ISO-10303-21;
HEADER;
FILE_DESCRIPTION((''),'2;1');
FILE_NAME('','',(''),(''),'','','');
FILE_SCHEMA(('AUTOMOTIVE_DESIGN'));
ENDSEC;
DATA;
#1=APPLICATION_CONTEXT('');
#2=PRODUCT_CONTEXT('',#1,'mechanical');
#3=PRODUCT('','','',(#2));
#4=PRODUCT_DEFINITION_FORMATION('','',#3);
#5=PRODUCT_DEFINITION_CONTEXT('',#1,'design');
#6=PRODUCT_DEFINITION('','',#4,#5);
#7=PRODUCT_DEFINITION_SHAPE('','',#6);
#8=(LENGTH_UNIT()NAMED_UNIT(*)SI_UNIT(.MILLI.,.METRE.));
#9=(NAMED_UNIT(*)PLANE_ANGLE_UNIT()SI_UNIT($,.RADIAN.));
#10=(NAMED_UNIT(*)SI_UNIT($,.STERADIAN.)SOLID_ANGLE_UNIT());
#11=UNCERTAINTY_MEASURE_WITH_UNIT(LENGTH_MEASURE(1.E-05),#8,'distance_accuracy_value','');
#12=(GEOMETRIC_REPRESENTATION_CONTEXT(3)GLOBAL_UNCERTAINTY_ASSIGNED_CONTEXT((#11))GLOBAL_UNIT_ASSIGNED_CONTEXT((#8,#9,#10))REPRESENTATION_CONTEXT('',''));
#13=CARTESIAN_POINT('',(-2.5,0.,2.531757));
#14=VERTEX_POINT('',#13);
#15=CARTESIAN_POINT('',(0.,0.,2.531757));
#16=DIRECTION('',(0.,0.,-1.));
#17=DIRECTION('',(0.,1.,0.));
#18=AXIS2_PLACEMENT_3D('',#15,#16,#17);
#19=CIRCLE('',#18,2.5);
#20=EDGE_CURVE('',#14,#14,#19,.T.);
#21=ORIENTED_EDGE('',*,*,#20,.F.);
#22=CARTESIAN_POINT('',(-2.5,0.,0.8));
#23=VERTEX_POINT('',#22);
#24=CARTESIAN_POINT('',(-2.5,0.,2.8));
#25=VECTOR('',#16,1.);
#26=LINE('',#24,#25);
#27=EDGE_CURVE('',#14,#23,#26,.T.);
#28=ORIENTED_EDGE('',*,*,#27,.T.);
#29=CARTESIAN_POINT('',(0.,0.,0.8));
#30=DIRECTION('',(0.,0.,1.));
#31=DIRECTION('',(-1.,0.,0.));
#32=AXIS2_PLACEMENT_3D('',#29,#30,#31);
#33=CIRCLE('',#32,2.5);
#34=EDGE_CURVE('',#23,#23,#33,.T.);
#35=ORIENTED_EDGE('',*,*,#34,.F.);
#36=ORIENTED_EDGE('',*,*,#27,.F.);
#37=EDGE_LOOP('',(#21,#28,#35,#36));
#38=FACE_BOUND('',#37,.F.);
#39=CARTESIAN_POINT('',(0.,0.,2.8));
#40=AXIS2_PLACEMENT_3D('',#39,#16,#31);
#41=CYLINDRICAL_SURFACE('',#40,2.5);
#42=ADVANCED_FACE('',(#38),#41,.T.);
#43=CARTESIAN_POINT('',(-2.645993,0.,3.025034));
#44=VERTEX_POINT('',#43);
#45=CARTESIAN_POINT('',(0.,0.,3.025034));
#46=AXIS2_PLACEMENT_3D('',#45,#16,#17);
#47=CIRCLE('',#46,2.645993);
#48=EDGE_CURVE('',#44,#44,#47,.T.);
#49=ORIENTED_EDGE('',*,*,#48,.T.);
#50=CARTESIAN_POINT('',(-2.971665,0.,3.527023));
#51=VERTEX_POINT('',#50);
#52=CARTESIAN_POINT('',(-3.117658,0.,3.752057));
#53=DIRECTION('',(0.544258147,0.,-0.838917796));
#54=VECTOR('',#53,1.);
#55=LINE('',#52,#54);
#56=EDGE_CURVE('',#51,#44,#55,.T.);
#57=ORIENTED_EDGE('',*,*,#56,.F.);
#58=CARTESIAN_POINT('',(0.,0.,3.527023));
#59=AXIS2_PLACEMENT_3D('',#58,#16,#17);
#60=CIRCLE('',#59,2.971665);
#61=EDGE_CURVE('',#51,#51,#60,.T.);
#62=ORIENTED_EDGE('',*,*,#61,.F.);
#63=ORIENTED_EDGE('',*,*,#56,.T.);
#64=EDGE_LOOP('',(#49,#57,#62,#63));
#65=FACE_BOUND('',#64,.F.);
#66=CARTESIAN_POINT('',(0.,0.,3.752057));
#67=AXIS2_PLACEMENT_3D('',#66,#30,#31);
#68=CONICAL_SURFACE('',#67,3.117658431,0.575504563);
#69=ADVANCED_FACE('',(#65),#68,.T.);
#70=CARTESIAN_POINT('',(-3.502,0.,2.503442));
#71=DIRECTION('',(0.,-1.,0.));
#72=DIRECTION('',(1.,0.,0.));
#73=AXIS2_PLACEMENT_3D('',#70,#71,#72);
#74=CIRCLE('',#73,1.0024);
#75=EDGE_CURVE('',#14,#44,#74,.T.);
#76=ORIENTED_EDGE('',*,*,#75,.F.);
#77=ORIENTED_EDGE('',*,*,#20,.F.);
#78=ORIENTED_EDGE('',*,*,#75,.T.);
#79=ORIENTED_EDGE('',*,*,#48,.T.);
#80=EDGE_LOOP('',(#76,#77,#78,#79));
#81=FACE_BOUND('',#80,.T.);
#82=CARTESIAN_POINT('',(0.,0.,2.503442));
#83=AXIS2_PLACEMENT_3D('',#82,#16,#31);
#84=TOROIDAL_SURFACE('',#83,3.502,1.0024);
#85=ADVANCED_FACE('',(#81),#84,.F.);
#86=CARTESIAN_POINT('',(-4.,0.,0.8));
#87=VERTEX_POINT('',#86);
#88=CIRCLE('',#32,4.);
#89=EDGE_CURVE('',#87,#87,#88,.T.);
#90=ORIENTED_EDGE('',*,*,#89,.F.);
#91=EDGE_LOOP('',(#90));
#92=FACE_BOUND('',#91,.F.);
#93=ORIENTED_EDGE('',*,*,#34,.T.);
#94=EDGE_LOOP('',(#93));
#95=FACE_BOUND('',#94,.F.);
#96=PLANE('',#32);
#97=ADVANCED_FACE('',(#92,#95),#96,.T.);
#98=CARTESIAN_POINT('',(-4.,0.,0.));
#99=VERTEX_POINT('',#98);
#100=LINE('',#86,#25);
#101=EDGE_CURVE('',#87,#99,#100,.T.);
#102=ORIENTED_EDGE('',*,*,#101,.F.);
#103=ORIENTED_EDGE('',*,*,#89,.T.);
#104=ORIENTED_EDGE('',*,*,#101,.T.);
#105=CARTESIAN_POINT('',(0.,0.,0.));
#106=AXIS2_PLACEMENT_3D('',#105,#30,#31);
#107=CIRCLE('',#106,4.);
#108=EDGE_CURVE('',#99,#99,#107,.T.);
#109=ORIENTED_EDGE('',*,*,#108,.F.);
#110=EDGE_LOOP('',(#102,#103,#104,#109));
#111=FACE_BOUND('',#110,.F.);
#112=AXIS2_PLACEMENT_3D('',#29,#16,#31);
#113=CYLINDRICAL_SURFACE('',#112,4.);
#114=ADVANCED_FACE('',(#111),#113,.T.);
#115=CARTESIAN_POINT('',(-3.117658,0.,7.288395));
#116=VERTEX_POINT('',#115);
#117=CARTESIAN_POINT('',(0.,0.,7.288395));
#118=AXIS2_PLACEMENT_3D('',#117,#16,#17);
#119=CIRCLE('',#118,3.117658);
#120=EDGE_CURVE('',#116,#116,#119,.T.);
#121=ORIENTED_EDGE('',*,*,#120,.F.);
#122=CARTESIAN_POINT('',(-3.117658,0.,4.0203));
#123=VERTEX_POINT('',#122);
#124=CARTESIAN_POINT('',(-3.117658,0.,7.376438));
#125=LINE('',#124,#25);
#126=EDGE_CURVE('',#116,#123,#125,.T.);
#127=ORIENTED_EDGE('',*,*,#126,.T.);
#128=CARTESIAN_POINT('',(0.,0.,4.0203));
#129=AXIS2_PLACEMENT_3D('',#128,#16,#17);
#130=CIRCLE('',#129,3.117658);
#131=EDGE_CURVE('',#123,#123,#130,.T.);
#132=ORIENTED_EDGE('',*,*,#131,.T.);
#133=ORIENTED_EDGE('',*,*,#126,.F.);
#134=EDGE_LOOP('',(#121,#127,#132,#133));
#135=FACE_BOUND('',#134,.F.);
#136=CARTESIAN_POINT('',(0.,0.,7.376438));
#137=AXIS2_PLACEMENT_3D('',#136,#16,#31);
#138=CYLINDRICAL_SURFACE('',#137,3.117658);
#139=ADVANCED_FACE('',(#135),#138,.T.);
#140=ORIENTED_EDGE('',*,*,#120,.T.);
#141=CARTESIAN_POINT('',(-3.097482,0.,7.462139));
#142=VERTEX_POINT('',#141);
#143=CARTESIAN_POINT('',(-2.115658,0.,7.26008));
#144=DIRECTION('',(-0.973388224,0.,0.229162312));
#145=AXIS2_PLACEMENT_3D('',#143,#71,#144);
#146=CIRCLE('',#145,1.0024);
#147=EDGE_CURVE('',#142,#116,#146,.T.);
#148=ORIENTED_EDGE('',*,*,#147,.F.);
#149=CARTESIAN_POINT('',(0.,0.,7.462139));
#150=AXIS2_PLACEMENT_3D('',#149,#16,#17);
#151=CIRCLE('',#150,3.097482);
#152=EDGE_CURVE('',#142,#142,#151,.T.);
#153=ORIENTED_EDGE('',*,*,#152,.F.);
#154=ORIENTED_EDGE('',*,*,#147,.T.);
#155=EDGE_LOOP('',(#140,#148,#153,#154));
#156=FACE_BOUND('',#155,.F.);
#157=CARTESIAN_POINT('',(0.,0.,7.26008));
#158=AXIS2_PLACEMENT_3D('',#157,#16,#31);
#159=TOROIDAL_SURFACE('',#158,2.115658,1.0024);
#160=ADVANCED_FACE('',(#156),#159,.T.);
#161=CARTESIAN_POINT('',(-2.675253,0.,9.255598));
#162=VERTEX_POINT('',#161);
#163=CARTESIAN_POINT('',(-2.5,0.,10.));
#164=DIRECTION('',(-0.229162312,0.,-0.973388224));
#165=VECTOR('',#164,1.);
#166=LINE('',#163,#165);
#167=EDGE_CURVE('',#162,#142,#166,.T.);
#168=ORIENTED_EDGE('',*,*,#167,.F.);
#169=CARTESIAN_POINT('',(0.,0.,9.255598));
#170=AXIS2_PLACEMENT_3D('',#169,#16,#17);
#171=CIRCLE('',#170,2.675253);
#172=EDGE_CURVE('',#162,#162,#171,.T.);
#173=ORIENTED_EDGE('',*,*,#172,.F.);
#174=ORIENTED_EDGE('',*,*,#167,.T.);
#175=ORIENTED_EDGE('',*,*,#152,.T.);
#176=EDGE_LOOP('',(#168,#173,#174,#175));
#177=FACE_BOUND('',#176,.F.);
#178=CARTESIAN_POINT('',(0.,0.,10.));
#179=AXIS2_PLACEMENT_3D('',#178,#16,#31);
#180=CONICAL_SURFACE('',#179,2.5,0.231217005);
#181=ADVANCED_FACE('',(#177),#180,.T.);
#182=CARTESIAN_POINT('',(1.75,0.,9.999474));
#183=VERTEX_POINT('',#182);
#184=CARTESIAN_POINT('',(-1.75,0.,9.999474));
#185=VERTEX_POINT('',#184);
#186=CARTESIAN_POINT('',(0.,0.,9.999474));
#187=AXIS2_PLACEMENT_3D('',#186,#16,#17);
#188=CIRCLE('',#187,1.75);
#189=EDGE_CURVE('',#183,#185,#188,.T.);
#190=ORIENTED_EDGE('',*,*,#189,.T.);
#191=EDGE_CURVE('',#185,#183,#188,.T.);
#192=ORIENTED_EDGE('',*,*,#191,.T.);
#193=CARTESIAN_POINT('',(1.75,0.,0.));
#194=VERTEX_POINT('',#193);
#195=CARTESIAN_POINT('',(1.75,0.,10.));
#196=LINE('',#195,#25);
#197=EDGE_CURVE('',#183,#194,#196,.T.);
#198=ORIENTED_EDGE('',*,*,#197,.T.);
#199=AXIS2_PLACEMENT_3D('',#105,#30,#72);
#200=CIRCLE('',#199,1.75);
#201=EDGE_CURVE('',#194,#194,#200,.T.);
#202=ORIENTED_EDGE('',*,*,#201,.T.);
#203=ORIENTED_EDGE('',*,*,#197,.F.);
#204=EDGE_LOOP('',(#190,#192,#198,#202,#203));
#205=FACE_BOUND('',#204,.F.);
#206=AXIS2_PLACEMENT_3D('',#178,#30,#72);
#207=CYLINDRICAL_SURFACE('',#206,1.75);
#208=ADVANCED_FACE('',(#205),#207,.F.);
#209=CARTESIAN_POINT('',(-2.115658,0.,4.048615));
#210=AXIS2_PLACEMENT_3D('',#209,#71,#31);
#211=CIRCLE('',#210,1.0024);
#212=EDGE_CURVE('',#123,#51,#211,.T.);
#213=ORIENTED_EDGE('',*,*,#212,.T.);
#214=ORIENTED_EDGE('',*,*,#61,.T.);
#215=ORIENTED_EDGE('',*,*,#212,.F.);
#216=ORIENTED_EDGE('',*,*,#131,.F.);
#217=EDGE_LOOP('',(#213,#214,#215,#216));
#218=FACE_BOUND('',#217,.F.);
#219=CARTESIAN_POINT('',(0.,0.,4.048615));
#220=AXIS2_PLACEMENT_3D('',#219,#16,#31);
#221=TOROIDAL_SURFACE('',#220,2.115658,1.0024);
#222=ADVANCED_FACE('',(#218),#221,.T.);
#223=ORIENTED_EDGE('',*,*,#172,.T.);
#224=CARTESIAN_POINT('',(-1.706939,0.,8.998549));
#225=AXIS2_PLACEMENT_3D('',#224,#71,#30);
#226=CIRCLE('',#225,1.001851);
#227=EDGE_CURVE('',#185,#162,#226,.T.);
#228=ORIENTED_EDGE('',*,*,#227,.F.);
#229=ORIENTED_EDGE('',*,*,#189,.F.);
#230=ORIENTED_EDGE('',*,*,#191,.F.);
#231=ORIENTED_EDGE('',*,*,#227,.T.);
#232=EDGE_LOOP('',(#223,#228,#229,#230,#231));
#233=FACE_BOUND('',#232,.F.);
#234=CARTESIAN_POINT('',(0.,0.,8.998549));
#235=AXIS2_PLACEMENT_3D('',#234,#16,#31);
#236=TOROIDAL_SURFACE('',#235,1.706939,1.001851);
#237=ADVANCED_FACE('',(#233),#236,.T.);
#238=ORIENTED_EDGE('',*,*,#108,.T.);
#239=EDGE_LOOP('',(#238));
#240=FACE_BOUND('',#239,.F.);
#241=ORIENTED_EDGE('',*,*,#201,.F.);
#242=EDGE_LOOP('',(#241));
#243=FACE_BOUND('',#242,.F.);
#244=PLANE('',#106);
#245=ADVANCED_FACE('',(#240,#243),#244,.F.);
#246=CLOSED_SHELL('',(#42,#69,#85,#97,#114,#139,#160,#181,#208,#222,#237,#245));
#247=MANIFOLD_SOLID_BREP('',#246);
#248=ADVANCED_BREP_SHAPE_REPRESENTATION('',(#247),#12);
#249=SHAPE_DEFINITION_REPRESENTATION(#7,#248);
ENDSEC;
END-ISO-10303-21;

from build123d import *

# Parameters (mm, degrees)
F2_R     = 1.75
F3_DEPTH = 25


# Not quite as in the source:
# - a fillet or chamfer that OpenCascade refuses, or shapes differently, is made with other operations: its cross-section is extruded or revolved along the edge and cut away or added


with BuildPart() as f1:
    # F0 (on Front) → F1 (revolve)
    with BuildSketch(Plane.XZ):
        Polygon((-4, 0), (0, 0), (0, 10), (-2.5, 10), (-3.1176584307, 7.3764383901), (-3.1176584307, 3.7520567627), (-2.5, 2.8), (-2.5, 0.8), (-4, 0.8), align=None)
    revolve(axis=Axis((0, 0, 5), (0, 0, 1)))

    # F2 (on face) → F3 (cut)
    with BuildSketch(Plane.XY.offset(10)):
        Circle(F2_R)
    extrude(amount=-F3_DEPTH, mode=Mode.SUBTRACT)

    # F4: fillet of radius 1 on 7 edges, made by hand

    # F4_s1 → F4_t2 (revolve)
    with BuildSketch(Plane.XZ):
        with BuildLine():
            ThreePointArc((-2.4996, 2.5034415217), (-2.5408144836, 2.7879202783), (-2.6610688008, 3.0490058884))
            Line((-2.6610688008, 3.0490058884), (-2.5769756809, 3.1035623251))
            ThreePointArc((-2.5769756809, 3.1035623251), (-2.4966090641, 2.9789505293), (-2.4159068801, 2.8545564367))
            Line((-2.4159068801, 2.8545564367), (-2.39976, 2.8))
            ThreePointArc((-2.39976, 2.8), (-2.39976, 2.6517207608), (-2.39936, 2.5034415217))
            Line((-2.39936, 2.5034415217), (-2.4996, 2.5034415217))
        make_face()
    revolve(axis=Axis((0, 0, 2.8), (0, 0, 1)))

    # F4_s3 → F4_t4 (revolve, cut)
    with BuildSketch(Plane.XZ):
        with BuildLine():
            ThreePointArc((-1.7069387157, 10.0004), (-2.3289092353, 9.7839522663), (-2.6821291124, 9.2281351497))
            Line((-2.6821291124, 9.2281351497), (-2.7796481521, 9.251093809))
            ThreePointArc((-2.7796481521, 9.251093809), (-2.6883889182, 9.6369804016), (-2.5975190397, 10.0229586592))
            Line((-2.5975190397, 10.0229586592), (-2.5, 10.1001851443))
            ThreePointArc((-2.5, 10.1001851443), (-2.1034693578, 10.1001851443), (-1.7069387157, 10.1005851443))
            Line((-1.7069387157, 10.1005851443), (-1.7069387157, 10.0004))
        make_face()
    revolve(axis=Axis((0, 0, 10), (0, 0, 1)), mode=Mode.SUBTRACT)

    # F4_s5 → F4_t6 (revolve, cut)
    with BuildSketch(Plane.XZ):
        with BuildLine():
            ThreePointArc((-3.0913827866, 7.489792119), (-3.1113671869, 7.3757078111), (-3.1180584307, 7.2600798179))
            Line((-3.1180584307, 7.2600798179), (-3.2182984307, 7.2600798179))
            ThreePointArc((-3.2182984307, 7.2600798179), (-3.2178984307, 7.318259104), (-3.2178984307, 7.3764383901))
            Line((-3.2178984307, 7.3764383901), (-3.2152308663, 7.3994096202))
            ThreePointArc((-3.2152308663, 7.3994096202), (-3.2018983666, 7.4560406522), (-3.1889552222, 7.5127633491))
            Line((-3.1889552222, 7.5127633491), (-3.0913827866, 7.489792119))
        make_face()
    revolve(axis=Axis((0, 0, 7.3764383901), (0, 0, 1)), mode=Mode.SUBTRACT)

    # F4_s7 → F4_t8 (revolve, cut)
    with BuildSketch(Plane.XZ):
        with BuildLine():
            ThreePointArc((-3.1180584307, 4.048615241), (-3.0768439472, 3.7641364844), (-2.9565896299, 3.5030508742))
            Line((-2.9565896299, 3.5030508742), (-3.0406827498, 3.4484944376))
            ThreePointArc((-3.0406827498, 3.4484944376), (-3.1210493667, 3.5731062334), (-3.2017515506, 3.697500326))
            Line((-3.2017515506, 3.697500326), (-3.2178984307, 3.7520567627))
            ThreePointArc((-3.2178984307, 3.7520567627), (-3.2178984307, 3.9003360018), (-3.2182984307, 4.048615241))
            Line((-3.2182984307, 4.048615241), (-3.1180584307, 4.048615241))
        make_face()
    revolve(axis=Axis((0, 0, 3.7520567627), (0, 0, 1)), mode=Mode.SUBTRACT)


solid = f1.part
